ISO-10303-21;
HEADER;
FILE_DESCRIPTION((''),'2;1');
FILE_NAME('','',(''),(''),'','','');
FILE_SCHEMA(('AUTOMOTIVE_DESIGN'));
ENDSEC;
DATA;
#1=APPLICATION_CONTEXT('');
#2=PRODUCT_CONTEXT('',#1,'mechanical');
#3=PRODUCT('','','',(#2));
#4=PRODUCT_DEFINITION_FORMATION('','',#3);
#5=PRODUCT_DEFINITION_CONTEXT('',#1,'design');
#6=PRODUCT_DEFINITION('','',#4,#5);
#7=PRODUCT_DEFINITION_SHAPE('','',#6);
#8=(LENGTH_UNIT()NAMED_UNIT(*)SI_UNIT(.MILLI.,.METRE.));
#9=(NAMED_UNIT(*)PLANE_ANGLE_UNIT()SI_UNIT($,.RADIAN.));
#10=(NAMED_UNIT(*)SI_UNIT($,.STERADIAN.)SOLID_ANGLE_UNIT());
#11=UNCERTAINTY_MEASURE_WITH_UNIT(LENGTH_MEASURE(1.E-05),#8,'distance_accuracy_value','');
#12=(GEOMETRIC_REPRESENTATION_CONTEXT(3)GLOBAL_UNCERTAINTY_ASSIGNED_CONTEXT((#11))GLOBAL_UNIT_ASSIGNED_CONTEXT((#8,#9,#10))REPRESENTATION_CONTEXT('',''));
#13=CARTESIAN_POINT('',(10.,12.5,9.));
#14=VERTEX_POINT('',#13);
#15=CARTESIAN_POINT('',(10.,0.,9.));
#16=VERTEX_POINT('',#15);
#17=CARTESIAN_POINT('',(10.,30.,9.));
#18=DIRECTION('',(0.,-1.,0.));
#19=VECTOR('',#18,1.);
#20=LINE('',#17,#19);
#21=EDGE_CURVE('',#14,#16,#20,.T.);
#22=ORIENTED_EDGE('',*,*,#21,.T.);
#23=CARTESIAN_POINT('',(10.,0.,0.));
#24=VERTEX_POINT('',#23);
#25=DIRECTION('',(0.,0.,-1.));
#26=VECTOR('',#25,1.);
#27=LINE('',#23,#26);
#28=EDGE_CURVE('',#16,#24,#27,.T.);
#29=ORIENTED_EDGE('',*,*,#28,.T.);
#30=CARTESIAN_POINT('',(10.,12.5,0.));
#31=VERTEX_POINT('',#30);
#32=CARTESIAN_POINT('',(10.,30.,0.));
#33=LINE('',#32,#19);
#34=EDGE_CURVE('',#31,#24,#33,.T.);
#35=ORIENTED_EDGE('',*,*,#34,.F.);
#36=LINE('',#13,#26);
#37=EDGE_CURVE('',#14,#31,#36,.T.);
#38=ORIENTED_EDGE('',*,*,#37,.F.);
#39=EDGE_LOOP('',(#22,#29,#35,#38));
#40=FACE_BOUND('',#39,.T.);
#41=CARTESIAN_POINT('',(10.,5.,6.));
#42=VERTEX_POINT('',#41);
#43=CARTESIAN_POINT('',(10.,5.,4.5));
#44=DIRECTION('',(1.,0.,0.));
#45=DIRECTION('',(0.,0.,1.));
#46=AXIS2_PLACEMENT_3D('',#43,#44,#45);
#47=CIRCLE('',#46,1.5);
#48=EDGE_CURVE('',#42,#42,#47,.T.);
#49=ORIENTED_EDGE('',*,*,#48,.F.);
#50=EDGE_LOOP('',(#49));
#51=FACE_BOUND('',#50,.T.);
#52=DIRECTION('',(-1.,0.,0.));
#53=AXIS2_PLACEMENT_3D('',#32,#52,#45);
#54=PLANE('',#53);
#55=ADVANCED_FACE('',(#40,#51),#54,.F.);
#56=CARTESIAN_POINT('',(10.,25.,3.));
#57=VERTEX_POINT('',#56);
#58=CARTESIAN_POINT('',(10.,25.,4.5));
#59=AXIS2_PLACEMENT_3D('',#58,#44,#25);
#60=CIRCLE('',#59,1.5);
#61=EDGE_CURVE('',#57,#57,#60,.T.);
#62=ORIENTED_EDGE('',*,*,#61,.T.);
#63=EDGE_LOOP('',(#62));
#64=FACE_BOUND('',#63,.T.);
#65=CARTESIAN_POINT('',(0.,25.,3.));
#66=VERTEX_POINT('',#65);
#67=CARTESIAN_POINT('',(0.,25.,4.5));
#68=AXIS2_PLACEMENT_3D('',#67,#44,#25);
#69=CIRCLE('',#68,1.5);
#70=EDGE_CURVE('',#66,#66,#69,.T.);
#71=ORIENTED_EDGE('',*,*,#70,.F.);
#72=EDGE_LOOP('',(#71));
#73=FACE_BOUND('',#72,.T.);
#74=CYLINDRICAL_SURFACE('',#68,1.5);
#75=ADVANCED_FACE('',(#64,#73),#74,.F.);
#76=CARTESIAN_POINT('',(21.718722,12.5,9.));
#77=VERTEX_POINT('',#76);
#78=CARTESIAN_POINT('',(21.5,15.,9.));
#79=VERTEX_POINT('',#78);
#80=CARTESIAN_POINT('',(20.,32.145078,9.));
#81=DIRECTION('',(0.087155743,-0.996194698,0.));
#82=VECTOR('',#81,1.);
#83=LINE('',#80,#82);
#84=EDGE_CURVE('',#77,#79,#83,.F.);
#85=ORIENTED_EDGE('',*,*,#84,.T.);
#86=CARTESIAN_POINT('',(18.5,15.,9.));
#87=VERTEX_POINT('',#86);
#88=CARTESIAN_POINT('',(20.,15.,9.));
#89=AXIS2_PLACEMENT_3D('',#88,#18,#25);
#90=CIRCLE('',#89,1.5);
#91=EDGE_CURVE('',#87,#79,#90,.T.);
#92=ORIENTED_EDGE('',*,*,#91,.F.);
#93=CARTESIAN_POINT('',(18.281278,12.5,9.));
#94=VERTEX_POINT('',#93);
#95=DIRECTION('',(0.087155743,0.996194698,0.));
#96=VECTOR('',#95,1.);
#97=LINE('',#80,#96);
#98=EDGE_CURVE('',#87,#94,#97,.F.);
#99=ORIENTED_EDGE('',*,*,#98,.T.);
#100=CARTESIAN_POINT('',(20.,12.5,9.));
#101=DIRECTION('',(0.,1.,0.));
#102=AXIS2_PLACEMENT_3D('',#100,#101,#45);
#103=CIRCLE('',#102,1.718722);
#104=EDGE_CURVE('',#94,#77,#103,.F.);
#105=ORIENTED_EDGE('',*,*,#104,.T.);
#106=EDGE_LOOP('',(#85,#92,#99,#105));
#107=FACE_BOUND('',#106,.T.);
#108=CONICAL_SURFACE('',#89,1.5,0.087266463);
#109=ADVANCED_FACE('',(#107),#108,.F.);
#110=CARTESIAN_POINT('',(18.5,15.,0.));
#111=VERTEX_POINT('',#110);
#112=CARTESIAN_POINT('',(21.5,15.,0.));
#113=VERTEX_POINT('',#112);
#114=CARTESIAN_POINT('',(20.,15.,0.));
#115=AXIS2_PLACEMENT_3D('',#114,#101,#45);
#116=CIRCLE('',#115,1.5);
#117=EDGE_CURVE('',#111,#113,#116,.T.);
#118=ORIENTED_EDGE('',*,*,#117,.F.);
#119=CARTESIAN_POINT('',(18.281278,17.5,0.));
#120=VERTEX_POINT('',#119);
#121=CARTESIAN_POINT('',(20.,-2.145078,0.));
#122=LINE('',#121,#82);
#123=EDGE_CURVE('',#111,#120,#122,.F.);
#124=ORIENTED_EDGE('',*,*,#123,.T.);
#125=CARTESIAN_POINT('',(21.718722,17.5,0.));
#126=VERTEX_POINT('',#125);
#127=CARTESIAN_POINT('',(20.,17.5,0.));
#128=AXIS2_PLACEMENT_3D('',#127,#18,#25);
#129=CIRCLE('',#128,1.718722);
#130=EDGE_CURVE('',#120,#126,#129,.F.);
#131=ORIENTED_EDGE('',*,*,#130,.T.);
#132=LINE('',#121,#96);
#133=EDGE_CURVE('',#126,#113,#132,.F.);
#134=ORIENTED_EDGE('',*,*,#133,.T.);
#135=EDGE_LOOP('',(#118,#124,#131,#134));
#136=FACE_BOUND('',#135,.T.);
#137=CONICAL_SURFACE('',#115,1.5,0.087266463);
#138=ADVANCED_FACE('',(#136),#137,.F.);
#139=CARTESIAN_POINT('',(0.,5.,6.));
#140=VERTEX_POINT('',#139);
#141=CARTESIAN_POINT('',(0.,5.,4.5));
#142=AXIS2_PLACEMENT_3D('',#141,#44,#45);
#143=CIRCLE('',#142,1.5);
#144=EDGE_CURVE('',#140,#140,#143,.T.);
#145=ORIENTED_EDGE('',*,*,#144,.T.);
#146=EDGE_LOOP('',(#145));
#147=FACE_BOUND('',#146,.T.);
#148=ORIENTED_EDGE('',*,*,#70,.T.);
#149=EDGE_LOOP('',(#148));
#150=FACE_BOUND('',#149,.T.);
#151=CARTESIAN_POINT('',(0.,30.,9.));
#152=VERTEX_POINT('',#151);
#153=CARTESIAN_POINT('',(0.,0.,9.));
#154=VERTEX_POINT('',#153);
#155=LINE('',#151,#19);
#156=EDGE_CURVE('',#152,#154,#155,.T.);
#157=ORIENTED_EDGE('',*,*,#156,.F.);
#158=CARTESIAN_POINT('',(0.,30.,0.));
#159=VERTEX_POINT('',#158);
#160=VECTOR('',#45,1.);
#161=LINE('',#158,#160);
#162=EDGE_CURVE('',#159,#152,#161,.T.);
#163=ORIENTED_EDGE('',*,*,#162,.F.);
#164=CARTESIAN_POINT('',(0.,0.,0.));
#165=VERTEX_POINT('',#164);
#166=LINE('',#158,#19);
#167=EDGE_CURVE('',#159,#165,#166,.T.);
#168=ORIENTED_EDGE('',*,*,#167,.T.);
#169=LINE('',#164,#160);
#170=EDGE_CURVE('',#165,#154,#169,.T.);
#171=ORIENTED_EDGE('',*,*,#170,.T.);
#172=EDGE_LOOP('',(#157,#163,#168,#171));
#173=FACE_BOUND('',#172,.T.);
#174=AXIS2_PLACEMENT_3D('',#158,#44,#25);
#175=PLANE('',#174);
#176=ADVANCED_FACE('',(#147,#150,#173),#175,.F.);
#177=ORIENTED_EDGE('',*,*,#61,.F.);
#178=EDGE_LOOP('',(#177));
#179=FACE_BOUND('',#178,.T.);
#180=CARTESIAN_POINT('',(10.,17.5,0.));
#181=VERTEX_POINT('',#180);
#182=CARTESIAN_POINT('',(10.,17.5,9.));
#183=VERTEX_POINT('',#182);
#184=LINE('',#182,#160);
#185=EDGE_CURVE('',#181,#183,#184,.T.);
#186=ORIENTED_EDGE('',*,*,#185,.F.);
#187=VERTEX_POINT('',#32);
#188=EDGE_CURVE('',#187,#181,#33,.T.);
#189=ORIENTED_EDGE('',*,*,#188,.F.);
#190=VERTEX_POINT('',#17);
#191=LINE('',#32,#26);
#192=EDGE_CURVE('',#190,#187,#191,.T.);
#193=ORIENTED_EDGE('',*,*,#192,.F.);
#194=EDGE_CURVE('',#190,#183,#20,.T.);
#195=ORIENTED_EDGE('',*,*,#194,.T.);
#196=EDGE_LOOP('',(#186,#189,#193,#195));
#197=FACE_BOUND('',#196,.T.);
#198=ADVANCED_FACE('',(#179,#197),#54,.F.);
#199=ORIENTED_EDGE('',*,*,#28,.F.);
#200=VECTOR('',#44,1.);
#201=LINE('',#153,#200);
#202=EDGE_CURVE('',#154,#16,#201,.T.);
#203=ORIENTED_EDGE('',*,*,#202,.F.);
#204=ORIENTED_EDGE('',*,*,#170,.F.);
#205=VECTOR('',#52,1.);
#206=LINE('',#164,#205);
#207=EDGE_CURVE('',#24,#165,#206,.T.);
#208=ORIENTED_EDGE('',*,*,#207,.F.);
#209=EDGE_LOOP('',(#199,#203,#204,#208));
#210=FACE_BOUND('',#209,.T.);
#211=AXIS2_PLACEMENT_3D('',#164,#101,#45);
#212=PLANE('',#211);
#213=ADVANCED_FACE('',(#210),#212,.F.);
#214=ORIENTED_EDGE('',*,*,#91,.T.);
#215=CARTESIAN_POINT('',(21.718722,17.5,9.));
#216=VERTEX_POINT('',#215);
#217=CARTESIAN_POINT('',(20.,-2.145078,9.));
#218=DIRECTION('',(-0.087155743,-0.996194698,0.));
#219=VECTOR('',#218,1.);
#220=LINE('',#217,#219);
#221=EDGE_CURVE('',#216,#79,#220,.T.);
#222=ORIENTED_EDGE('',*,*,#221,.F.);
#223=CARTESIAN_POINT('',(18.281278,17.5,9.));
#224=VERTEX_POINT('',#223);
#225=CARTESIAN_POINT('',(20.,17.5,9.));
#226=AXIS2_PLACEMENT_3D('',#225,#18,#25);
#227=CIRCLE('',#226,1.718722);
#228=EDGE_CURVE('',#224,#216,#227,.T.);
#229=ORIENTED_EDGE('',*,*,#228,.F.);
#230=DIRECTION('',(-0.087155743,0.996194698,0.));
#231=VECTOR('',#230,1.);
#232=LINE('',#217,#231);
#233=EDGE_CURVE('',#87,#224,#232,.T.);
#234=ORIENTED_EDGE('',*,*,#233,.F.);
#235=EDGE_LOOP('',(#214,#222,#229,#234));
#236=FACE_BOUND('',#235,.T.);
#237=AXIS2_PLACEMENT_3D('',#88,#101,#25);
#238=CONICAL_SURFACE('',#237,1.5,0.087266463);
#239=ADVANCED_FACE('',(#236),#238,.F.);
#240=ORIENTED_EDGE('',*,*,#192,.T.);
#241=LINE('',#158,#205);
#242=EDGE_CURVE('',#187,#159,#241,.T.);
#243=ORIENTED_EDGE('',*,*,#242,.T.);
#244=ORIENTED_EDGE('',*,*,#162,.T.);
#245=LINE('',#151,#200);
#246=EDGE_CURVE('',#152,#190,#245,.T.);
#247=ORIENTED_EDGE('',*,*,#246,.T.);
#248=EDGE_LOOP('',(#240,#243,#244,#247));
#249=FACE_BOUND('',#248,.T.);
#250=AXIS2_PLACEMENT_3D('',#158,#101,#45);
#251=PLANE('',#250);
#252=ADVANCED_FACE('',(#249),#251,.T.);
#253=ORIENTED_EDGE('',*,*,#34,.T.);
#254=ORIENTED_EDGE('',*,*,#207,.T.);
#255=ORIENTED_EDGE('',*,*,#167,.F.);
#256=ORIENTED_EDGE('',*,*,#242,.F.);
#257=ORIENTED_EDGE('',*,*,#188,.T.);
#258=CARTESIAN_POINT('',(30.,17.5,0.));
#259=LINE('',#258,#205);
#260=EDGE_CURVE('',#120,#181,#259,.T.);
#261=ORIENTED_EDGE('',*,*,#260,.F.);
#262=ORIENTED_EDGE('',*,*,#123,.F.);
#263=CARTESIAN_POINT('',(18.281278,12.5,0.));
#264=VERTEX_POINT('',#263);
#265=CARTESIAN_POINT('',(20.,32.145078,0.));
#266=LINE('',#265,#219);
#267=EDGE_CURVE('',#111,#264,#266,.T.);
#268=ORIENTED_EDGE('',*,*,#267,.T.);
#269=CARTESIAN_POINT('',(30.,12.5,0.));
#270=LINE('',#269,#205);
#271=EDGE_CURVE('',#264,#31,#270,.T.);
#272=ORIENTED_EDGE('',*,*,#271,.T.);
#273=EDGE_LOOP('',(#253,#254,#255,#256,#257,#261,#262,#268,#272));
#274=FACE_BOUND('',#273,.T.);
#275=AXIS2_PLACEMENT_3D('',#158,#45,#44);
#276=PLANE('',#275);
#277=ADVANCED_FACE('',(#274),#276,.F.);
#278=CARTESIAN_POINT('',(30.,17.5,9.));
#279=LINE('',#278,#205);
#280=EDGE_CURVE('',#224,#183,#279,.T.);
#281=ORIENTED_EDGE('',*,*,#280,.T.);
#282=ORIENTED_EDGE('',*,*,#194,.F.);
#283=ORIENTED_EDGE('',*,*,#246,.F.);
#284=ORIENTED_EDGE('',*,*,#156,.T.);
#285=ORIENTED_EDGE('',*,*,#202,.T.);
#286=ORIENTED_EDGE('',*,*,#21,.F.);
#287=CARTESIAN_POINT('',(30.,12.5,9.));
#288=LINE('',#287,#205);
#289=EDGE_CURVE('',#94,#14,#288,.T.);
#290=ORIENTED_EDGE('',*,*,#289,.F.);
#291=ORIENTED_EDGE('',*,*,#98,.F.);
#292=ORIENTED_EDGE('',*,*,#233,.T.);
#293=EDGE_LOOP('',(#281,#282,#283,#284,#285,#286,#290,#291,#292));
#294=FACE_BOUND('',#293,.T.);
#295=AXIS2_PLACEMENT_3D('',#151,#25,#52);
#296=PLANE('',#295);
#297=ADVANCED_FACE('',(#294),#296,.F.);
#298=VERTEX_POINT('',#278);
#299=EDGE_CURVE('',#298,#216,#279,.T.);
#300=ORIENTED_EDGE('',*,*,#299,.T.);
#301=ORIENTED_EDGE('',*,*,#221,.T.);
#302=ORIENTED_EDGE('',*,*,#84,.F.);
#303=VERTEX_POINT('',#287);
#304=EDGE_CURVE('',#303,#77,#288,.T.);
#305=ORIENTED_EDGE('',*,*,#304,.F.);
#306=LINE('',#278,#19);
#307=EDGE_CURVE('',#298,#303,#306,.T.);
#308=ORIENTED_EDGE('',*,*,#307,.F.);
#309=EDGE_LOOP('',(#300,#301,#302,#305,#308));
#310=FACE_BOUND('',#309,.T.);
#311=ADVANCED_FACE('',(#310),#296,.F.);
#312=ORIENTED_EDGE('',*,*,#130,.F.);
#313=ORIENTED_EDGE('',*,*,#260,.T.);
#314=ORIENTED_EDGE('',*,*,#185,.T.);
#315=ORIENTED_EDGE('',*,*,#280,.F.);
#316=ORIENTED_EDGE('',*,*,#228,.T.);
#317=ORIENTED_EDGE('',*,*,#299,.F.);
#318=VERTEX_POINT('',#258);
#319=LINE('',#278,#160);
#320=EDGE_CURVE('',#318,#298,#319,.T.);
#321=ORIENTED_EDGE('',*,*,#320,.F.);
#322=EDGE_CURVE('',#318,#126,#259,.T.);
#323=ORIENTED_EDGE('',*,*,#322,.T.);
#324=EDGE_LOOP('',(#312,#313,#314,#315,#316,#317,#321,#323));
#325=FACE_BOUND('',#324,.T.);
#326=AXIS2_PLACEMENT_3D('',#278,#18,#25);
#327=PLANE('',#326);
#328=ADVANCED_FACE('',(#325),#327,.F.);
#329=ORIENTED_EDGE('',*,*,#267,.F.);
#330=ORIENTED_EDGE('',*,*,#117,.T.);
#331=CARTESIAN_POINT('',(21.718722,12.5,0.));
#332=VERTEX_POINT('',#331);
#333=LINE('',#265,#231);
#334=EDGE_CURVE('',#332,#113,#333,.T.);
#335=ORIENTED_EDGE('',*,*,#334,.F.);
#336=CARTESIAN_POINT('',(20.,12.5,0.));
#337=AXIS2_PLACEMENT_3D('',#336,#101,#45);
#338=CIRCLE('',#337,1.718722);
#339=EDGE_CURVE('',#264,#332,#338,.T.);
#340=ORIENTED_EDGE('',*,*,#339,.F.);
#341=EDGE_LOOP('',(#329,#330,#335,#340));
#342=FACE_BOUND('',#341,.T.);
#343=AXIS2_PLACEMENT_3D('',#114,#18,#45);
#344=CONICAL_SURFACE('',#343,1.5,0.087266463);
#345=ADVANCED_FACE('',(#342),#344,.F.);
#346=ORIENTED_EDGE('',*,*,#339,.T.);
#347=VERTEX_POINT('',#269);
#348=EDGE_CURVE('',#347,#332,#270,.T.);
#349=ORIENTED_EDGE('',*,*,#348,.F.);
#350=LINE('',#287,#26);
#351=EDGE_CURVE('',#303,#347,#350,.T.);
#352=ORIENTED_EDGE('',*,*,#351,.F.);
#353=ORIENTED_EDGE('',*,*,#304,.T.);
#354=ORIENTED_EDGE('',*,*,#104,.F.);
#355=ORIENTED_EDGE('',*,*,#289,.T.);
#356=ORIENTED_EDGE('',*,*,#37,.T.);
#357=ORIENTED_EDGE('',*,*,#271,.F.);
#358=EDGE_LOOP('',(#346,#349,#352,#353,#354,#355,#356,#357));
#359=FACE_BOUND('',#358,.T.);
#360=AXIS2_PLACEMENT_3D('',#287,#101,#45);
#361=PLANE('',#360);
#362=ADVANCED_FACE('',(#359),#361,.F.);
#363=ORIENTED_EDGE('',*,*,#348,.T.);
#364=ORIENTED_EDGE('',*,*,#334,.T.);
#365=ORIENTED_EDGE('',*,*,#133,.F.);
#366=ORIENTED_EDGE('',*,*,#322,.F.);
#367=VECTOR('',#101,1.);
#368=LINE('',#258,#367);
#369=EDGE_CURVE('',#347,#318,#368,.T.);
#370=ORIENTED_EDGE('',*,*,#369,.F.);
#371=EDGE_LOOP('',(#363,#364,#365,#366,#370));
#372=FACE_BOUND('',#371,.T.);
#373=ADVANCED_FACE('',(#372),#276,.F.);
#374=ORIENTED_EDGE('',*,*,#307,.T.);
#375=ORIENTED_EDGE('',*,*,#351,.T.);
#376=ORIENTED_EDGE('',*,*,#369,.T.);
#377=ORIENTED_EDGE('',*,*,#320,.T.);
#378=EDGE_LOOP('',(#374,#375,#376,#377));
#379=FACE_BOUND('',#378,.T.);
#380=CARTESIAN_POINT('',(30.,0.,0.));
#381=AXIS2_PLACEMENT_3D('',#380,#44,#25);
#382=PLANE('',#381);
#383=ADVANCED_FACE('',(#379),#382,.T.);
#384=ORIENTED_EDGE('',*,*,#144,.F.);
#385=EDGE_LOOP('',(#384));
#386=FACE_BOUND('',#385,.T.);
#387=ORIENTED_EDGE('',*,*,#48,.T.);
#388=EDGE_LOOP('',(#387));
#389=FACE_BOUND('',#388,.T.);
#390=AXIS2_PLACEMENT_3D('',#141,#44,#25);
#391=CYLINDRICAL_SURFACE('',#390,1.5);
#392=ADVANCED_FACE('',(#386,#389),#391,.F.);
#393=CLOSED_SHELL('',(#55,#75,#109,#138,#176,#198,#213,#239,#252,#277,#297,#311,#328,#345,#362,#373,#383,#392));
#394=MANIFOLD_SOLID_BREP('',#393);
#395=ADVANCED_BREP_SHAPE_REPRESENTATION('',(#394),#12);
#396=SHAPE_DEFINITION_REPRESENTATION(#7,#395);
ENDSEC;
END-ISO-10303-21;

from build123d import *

# Parameters (mm, degrees)
SKETCH1_W           = 10
SKETCH1_H           = 9
BOSS_EXTRUDE1_DEPTH = 30
SKETCH2_W           = 9
SKETCH2_H           = 5
BOSS_EXTRUDE2_DEPTH = 20
SKETCH3_R           = 1.5
CUT_EXTRUDE1_DEPTH  = 38.161808352


# Read off the part's stored shape, not the designer's step: Cut-Extrude2
with BuildPart() as part:
    # Sketch1 → Boss-Extrude1 (new body)
    with BuildSketch(Plane(origin=(0, 0, 0), x_dir=(1, 0, 0), z_dir=(0, 1, 0))):
        with Locations((5, -4.5)):
            Rectangle(SKETCH1_W, SKETCH1_H)
    extrude(amount=BOSS_EXTRUDE1_DEPTH)

    # Sketch2 → Boss-Extrude2 (add)
    with BuildSketch(Plane(origin=(10, 0, 0), x_dir=(0, 0, -1), z_dir=(1, 0, 0))):
        with Locations((-4.5, 15)):
            Rectangle(SKETCH2_W, SKETCH2_H)
    extrude(amount=BOSS_EXTRUDE2_DEPTH)

    # Sketch3 → Cut-Extrude1 (cut, through all)
    with BuildSketch(Plane(origin=(10, 0, 0), x_dir=(0, 0, -1), z_dir=(1, 0, 0))):
        with Locations((-4.5, 25)):
            Circle(SKETCH3_R)
        with Locations(Location((-4.5, 5, 0), (0, 0, 180))):
            Circle(SKETCH3_R)
    extrude(amount=-CUT_EXTRUDE1_DEPTH, mode=Mode.SUBTRACT)

    # Cut-Extrude2 outline → Cut-Extrude2 (revolve, cut)
    with BuildSketch(Plane(origin=(20, 0, 0), x_dir=(1, 0, 0), z_dir=(0, 0, 1))):
        Polygon((1.718721659, 12.5), (1.5, 15), (1.718721659, 17.5), (0, 17.5), (0, 12.5), align=None)
    cut_extrude2 = revolve(axis=Axis((20, 0, 0), (0, 1, 0)), mode=Mode.SUBTRACT)

    # Mirror1: Cut-Extrude2 across plane
    add(cut_extrude2.mirror(Plane.XY.offset(4.5)), mode=Mode.SUBTRACT)


solid = part.part
